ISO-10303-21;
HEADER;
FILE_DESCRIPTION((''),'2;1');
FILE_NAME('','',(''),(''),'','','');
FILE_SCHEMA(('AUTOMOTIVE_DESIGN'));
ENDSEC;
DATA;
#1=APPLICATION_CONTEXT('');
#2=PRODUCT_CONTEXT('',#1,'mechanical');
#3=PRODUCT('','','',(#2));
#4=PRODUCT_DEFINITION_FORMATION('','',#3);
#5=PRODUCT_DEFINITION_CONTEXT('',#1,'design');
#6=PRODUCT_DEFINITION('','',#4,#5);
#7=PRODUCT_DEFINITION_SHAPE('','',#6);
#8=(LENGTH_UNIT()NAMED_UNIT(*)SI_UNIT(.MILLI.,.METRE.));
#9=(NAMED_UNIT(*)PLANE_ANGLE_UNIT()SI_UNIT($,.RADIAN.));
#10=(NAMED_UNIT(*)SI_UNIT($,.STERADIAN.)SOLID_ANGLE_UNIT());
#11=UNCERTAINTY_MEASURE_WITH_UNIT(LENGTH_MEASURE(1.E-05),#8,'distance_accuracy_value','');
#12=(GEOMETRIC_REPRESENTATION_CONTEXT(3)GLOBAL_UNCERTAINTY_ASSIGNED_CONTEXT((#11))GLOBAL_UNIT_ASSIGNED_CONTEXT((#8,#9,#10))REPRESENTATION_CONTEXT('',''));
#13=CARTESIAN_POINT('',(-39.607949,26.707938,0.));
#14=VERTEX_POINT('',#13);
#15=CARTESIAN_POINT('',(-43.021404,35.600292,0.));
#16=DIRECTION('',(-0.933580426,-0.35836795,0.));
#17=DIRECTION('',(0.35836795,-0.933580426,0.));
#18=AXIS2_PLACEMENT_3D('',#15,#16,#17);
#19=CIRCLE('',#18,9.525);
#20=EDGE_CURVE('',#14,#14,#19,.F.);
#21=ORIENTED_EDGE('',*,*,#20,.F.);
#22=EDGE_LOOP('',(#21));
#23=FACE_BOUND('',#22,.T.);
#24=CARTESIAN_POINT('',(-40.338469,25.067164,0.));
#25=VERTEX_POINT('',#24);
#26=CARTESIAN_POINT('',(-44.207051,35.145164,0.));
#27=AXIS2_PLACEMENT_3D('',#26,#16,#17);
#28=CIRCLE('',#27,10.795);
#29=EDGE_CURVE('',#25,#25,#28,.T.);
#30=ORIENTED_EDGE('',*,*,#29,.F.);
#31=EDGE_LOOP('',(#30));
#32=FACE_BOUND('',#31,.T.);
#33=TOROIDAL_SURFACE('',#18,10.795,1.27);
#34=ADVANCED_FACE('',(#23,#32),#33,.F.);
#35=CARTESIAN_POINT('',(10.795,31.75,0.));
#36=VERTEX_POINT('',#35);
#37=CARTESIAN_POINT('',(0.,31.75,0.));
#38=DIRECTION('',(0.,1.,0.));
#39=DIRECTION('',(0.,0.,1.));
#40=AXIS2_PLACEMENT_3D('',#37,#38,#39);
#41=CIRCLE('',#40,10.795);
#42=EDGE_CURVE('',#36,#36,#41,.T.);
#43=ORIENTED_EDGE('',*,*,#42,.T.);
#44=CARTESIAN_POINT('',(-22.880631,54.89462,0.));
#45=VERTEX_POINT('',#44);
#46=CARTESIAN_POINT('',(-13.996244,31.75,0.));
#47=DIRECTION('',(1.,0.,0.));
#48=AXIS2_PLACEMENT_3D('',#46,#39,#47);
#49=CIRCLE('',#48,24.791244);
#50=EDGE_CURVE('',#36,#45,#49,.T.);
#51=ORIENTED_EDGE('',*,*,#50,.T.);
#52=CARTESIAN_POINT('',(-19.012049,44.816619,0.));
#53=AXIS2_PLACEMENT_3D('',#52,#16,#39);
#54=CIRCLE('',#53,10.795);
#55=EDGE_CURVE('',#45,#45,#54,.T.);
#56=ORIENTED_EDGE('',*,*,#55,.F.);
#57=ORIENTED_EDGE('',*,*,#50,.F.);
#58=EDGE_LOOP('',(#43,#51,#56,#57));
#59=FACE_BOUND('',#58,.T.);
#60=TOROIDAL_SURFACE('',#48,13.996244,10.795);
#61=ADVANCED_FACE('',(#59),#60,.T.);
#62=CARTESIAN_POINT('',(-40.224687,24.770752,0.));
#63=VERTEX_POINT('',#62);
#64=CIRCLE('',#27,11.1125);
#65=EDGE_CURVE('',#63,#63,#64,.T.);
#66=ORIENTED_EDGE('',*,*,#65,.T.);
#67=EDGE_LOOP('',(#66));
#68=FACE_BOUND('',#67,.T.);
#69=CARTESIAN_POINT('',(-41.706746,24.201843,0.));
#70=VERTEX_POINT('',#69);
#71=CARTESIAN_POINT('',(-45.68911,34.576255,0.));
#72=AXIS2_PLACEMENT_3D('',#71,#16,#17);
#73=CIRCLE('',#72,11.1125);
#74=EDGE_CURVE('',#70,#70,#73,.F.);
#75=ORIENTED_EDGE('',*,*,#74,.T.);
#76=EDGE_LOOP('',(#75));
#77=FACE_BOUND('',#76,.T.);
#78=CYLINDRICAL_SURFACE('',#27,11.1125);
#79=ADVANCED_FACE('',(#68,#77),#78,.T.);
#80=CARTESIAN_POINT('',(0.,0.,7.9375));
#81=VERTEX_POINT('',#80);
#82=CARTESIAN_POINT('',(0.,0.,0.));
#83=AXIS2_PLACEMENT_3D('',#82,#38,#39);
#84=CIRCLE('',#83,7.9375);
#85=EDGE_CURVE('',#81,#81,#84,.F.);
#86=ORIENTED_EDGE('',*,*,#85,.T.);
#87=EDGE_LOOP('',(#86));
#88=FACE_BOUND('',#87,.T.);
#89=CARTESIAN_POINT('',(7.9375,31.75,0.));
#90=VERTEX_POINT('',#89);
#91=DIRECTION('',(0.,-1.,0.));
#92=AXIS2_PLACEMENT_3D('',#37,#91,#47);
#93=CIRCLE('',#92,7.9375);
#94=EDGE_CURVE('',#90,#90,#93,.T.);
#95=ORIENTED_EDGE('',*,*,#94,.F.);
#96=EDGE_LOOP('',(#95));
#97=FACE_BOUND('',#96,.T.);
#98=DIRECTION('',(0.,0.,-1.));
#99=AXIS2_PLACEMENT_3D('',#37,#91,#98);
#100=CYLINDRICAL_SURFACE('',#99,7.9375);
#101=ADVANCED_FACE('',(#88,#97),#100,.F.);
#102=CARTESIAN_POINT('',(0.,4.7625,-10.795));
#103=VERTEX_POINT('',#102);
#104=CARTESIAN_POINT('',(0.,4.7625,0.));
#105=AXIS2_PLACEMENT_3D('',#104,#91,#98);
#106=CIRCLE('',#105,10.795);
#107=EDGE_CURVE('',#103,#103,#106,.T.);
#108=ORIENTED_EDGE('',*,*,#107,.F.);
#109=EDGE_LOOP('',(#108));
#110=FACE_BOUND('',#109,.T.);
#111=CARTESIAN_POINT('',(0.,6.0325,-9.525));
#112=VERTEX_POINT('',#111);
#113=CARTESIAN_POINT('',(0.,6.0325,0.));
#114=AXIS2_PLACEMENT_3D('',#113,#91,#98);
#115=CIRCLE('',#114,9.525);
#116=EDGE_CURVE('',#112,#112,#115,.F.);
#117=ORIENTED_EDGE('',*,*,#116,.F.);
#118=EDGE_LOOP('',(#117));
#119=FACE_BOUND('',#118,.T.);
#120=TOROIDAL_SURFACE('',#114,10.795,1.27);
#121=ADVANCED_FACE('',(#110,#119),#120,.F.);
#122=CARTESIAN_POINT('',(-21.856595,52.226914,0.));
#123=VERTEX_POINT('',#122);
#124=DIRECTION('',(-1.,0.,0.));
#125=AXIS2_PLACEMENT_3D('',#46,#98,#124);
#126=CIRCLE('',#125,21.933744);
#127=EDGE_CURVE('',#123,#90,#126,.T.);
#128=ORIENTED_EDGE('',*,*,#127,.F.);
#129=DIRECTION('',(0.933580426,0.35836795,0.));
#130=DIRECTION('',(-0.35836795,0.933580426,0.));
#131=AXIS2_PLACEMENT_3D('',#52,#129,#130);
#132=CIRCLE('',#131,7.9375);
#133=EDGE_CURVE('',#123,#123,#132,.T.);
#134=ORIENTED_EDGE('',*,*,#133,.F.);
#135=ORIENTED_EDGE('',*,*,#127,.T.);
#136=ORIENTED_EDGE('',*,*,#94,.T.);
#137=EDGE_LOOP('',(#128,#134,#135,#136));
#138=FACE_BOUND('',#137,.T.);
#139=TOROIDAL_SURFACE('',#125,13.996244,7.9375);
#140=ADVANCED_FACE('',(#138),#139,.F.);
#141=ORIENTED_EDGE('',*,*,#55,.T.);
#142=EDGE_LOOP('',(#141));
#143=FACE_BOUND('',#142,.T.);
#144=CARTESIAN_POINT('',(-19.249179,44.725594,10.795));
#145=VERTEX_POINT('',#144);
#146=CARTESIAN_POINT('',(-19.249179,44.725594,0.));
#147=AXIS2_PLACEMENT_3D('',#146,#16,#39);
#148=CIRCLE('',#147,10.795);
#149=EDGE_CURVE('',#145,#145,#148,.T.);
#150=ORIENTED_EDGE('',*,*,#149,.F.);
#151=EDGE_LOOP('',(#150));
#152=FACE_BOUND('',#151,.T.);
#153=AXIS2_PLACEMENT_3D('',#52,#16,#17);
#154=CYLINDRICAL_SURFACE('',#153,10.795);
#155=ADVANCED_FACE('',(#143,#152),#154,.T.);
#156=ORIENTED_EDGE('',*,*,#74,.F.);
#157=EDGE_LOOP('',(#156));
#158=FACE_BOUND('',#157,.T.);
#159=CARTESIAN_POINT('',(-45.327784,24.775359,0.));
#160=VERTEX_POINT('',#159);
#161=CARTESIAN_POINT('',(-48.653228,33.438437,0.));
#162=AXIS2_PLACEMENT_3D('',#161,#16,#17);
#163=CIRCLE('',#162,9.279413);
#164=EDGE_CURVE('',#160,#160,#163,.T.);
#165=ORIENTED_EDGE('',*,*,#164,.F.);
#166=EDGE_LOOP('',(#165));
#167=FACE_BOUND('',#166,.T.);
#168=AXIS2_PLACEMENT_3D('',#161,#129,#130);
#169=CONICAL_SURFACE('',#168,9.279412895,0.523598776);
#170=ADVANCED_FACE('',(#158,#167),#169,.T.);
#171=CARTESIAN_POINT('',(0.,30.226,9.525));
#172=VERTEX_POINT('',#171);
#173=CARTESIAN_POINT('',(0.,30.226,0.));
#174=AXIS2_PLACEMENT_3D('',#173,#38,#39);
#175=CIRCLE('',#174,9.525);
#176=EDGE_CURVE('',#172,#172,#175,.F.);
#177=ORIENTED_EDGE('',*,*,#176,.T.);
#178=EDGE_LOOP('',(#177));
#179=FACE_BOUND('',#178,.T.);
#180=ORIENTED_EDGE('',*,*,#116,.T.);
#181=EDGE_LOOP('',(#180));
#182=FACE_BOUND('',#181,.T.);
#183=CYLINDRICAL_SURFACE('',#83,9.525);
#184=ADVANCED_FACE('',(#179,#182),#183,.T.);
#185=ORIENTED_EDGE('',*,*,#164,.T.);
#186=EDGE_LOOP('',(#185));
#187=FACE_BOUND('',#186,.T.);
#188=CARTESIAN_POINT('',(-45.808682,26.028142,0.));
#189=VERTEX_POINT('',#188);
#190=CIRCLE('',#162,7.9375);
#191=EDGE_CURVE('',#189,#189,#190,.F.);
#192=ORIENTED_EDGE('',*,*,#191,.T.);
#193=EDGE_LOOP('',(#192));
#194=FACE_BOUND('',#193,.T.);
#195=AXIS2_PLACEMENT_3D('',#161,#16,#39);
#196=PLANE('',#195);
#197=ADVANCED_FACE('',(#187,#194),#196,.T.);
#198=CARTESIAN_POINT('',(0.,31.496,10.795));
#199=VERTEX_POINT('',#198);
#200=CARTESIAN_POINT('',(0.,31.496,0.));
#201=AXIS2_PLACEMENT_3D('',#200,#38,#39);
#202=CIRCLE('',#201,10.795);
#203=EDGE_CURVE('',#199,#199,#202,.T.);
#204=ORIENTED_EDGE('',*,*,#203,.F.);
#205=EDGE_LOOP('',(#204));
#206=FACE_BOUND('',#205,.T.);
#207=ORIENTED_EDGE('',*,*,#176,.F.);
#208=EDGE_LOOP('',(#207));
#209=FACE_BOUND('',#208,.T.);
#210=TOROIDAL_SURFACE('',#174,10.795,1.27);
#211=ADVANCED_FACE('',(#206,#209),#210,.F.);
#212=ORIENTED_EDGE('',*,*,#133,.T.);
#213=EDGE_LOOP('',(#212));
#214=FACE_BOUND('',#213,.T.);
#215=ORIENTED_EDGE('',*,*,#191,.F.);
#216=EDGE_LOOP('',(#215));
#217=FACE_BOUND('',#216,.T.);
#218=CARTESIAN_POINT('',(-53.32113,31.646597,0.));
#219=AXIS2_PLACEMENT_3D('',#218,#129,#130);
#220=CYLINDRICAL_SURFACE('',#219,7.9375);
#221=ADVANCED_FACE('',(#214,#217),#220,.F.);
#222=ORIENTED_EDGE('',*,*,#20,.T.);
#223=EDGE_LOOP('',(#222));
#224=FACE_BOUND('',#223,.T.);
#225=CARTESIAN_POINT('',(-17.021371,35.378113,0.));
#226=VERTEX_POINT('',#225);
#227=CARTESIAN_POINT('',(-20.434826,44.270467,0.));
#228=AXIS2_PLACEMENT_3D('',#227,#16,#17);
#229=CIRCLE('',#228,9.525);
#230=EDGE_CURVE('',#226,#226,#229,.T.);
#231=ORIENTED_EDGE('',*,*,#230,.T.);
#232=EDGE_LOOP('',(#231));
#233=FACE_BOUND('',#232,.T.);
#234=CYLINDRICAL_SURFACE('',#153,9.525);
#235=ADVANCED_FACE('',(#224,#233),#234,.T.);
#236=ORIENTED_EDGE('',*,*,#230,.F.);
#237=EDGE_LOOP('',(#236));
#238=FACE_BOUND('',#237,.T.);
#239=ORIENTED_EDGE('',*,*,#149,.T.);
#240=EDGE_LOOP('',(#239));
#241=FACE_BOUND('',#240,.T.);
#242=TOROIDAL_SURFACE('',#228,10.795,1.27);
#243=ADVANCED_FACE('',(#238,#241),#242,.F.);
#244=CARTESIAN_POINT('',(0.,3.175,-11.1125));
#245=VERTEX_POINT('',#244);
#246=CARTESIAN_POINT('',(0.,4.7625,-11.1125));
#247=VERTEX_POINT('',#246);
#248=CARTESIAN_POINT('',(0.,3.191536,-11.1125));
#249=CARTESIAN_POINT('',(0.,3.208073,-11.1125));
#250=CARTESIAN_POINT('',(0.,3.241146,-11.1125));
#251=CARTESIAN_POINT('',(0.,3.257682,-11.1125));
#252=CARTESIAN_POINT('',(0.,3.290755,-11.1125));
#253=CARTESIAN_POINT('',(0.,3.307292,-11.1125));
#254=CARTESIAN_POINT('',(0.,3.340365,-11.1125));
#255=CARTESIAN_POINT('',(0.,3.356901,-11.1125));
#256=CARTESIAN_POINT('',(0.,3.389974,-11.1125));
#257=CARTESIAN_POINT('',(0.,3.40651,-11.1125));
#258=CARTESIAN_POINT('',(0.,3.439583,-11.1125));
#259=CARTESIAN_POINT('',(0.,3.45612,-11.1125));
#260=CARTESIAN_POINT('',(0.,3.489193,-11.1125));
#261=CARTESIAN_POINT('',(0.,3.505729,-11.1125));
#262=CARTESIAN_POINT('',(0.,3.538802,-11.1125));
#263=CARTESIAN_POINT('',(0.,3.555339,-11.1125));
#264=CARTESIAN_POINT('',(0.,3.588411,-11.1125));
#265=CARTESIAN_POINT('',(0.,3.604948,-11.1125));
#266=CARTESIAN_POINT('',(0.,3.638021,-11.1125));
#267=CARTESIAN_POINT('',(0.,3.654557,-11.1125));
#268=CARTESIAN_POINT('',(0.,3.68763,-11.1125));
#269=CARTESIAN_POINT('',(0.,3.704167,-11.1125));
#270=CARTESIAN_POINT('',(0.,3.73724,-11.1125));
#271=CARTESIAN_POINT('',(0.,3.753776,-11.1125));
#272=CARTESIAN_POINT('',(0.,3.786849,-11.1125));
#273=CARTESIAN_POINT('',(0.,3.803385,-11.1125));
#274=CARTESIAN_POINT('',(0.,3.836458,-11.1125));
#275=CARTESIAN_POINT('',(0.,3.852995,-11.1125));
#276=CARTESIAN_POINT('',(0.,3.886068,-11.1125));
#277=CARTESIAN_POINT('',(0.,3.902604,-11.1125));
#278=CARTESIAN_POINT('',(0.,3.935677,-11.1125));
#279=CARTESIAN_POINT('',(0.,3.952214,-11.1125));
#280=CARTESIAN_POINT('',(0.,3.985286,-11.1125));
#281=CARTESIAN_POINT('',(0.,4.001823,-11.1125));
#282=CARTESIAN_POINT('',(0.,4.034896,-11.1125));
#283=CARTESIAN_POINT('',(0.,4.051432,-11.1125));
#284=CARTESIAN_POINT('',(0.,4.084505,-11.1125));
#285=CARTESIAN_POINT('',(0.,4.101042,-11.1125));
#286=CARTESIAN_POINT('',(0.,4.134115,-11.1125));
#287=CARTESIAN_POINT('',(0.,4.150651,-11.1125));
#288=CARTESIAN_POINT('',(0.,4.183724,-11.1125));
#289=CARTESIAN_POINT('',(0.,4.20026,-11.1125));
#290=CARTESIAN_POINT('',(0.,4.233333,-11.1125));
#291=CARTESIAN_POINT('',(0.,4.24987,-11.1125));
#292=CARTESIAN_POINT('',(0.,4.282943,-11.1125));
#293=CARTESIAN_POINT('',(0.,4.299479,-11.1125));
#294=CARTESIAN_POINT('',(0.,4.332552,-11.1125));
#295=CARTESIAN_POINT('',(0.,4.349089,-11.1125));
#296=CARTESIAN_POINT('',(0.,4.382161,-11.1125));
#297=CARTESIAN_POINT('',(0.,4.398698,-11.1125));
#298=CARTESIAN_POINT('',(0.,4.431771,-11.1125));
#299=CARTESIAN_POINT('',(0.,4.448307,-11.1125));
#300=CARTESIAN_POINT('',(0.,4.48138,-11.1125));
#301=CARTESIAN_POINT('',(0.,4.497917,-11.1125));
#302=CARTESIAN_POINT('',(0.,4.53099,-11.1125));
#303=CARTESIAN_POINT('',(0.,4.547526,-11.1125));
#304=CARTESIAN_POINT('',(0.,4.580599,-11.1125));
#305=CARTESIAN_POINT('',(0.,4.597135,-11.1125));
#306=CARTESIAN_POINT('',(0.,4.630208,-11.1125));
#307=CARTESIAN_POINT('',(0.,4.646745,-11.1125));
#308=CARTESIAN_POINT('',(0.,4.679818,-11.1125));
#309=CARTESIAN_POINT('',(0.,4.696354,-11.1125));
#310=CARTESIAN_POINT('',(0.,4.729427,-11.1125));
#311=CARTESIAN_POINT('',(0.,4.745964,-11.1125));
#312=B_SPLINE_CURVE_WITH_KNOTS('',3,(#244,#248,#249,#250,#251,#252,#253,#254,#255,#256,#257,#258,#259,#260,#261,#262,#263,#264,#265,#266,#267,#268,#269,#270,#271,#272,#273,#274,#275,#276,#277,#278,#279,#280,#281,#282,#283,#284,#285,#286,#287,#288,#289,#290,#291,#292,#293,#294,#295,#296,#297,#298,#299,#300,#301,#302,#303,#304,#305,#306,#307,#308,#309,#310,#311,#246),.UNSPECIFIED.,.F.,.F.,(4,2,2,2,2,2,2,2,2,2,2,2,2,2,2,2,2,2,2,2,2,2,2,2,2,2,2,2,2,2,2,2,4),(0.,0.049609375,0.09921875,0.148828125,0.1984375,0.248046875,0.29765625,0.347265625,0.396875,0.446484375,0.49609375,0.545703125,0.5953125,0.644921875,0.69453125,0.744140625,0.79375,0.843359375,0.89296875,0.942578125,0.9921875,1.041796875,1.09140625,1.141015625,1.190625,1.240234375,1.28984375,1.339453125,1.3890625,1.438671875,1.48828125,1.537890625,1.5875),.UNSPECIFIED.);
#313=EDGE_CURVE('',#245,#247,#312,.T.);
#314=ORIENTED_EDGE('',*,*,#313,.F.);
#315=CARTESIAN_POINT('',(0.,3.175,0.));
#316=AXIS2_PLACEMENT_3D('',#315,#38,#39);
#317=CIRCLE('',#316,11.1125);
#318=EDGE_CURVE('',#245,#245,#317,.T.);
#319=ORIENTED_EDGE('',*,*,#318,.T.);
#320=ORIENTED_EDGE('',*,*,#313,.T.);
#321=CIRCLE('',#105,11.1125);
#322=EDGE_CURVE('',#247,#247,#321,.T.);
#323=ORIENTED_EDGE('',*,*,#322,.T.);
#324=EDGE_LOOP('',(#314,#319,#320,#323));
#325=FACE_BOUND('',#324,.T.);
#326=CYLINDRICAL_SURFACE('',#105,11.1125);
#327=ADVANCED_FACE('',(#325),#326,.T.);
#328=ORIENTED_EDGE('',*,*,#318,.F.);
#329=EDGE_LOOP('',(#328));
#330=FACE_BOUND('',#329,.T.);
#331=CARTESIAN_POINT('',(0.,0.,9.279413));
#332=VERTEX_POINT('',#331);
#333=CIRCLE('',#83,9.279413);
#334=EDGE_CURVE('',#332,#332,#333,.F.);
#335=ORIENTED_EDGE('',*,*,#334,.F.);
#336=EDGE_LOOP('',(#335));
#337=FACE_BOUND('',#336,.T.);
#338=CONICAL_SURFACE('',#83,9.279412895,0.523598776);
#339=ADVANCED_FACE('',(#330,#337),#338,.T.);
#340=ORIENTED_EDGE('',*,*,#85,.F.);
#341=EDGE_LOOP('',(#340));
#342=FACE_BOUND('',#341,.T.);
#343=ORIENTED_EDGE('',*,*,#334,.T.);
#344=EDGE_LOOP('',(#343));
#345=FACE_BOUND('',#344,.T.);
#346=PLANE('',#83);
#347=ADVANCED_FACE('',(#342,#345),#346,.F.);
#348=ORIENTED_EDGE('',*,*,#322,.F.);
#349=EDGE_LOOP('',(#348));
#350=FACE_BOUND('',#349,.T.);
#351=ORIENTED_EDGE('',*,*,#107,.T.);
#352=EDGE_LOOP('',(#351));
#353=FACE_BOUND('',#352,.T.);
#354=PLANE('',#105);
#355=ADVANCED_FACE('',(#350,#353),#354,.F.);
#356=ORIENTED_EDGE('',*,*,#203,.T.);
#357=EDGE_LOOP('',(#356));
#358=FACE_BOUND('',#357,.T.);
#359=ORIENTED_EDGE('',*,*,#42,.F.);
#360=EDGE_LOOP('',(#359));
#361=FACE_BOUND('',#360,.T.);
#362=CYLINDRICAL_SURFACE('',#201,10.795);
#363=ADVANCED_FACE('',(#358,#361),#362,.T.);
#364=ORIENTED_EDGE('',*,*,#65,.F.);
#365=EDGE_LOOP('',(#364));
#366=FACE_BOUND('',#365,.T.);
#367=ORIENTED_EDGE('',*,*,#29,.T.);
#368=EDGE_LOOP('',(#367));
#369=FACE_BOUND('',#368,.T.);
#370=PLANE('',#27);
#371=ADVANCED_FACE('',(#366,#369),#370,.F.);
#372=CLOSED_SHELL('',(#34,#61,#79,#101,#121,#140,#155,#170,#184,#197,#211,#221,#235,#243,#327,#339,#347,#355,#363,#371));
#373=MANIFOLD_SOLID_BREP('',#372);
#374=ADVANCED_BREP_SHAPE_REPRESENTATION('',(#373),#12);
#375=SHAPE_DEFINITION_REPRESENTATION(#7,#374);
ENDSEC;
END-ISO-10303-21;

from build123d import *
from OCP.BRepFilletAPI import BRepFilletAPI_MakeChamfer

# Parameters (mm, degrees)
SWEEP1_PROFILE_R     = 9.525
SWEEP2_PROFILE_R     = 10.794999999999998
CUT_SWEEP1_PROFILE_R = 7.9375
SKETCH1_R            = 11.112499999999997
SKETCH1_R_2          = 9.524999999999995
BOSS_EXTRUDE1_DEPTH  = 4.7625
BOSS_EXTRUDE2_START  = -4.7625
SKETCH2_R            = 11.112499999999999
SKETCH2_R_2          = 9.525
BOSS_EXTRUDE2_DEPTH  = 4.7625
CHAMFER1_SIZE        = 3.175
CHAMFER1_SIZE2       = 1.8330871046770671
CHAMFER1_SIZE2_2     = 1.8330871046770665
FILLET1_R            = 1.27
FILLET2_R            = 1.27


with BuildPart() as part:
    # Sweep1: sweep along a curve in space
    with BuildLine() as sweep1_path:
        Line((0, 0, 0), (0, 31.75, 0))
        ThreePointArc((0, 31.75, 0), (-6.068684082248161, 43.28467117973109, 2.908e-14), (-19.012049192719964, 44.81661939415364, 3.295e-14))
        Line((-48.653227734006144, 33.43843699609044, -2.6e-16), (-19.012049192719964, 44.81661939415364, 3.295e-14))
    # Sweep1 profile (on start of the path) → Sweep1 (sweep)
    with BuildSketch(Plane.ZX):
        Circle(SWEEP1_PROFILE_R)
    sweep(path=sweep1_path.line)

    # Sweep2: sweep along a curve in space
    with BuildLine() as sweep2_path:
        Line((-19.249178621050255, 44.72559393496914, 3.268e-14), (-19.012049192719964, 44.81661939415364, 3.295e-14))
        ThreePointArc((0, 31.75, 0), (-6.068684082248161, 43.28467117973109, 2.908e-14), (-19.012049192719964, 44.81661939415364, 3.295e-14))
        Line((0, 31.496000000000002, 0), (0, 31.75, 0))
    # Sweep2 profile (on start of the path) → Sweep2 (sweep)
    with BuildSketch(Plane(origin=(-19.249178621050255, 44.72559393496914, 3.268e-14), x_dir=(-0.3583679495452768, 0.9335804264972108, 0), z_dir=(0.9335804264972108, 0.3583679495452768, 1.0458735957354108e-15))):
        Circle(SWEEP2_PROFILE_R)
    sweep(path=sweep2_path.line)

    # Cut-Sweep1: sweep along a curve in space
    with BuildLine() as cut_sweep1_path:
        Line((0, 0, 0), (0, 31.75, 0))
        ThreePointArc((0, 31.75, 0), (-6.068684082248161, 43.28467117973109, 2.908e-14), (-19.012049192719964, 44.81661939415364, 3.295e-14))
        Line((-48.653227734006144, 33.43843699609044, -2.6e-16), (-19.012049192719964, 44.81661939415364, 3.295e-14))
    # Cut-Sweep1 profile (on start of the path) → Cut-Sweep1 (sweep, cut)
    with BuildSketch(Plane.ZX):
        Circle(CUT_SWEEP1_PROFILE_R)
    sweep(path=cut_sweep1_path.line, mode=Mode.SUBTRACT)

    # Sketch1 → Boss-Extrude1 (add)
    with BuildSketch(Plane(origin=(-31.21747027220995, -11.983264102288556, -3.497e-14), x_dir=(3.580410510393217e-07, -9.327288296924547e-07, 0.9999999999995011), z_dir=(-0.9335804264972027, -0.3583679495452978, -1.045873613984892e-15))):
        with Locations(Location((-4.860884700071e-05, 48.65322773398188, 0), (0, 0, 270.000057244))):
            Circle(SKETCH1_R)
        with Locations(Location((-4.860884700071e-05, 48.65322773398188, 0), (0, 0, 270.000057244))):
            Circle(SKETCH1_R_2, mode=Mode.SUBTRACT)
    extrude(amount=-BOSS_EXTRUDE1_DEPTH)

    # Sketch2 → Boss-Extrude2 (add)
    with BuildSketch(Plane.XZ.offset(BOSS_EXTRUDE2_START)):
        with Locations(Location((0, 0, 0), (0, 0, 270))):
            Circle(SKETCH2_R)
        with Locations(Location((0, 0, 0), (0, 0, 90))):
            Circle(SKETCH2_R_2, mode=Mode.SUBTRACT)
    extrude(amount=BOSS_EXTRUDE2_DEPTH)

    # Chamfer1: one chamfer whose edges measure the first distance from different faces: ONE call of the kernel's chamfer builder (chamfer() names one face for all edges)
    chamfer1_edges_1 = [part.edges().sort_by_distance(p)[0] for p in [
        (-52.635591573328284, 43.81284948554062, -9.401835e-11),
    ]]
    chamfer1_side_1 = [part.faces().sort_by_distance(p)[0] for p in [
        (-50.41250318273182, 44.666213165395355, -9.401586e-11),
    ]]
    chamfer1_edges_2 = [part.edges().sort_by_distance(p)[0] for p in [
        (3.4e-15, 0, 11.112499999999999),
    ]]
    chamfer1_side_2 = [part.faces().sort_by_distance(p)[0] for p in [
        (3.4e-15, 2.38125, 11.112499999999999),
    ]]
    chamfer1 = BRepFilletAPI_MakeChamfer(part.part.solid().wrapped)
    for e in chamfer1_edges_1:
        chamfer1.Add(CHAMFER1_SIZE, CHAMFER1_SIZE2, e.wrapped, chamfer1_side_1[0].wrapped)  # the first distance lies on this face
    for e in chamfer1_edges_2:
        chamfer1.Add(CHAMFER1_SIZE, CHAMFER1_SIZE2_2, e.wrapped, chamfer1_side_2[0].wrapped)  # the first distance lies on this face
    add(Compound.cast(chamfer1.Shape()), mode=Mode.REPLACE)

    # Fillet1
    fillet1_edges = [part.edges().sort_by_distance(p)[0] for p in [
        (-44.20705095281329, 35.14516435580008, -9.525000000000015),
        (-1.75e-15, 4.7625, -9.525),
    ]]
    fillet(fillet1_edges, radius=FILLET1_R)

    # Fillet2
    fillet2_edges = [part.edges().sort_by_distance(p)[0] for p in [
        (1.17e-15, 31.496000000000002, -9.525),
        (-19.249178621050255, 44.725593934969154, -9.524999999999967),
    ]]
    fillet(fillet2_edges, radius=FILLET2_R - 0.0001)  # a hair under: the kernel refuses the full size


solid = part.part
